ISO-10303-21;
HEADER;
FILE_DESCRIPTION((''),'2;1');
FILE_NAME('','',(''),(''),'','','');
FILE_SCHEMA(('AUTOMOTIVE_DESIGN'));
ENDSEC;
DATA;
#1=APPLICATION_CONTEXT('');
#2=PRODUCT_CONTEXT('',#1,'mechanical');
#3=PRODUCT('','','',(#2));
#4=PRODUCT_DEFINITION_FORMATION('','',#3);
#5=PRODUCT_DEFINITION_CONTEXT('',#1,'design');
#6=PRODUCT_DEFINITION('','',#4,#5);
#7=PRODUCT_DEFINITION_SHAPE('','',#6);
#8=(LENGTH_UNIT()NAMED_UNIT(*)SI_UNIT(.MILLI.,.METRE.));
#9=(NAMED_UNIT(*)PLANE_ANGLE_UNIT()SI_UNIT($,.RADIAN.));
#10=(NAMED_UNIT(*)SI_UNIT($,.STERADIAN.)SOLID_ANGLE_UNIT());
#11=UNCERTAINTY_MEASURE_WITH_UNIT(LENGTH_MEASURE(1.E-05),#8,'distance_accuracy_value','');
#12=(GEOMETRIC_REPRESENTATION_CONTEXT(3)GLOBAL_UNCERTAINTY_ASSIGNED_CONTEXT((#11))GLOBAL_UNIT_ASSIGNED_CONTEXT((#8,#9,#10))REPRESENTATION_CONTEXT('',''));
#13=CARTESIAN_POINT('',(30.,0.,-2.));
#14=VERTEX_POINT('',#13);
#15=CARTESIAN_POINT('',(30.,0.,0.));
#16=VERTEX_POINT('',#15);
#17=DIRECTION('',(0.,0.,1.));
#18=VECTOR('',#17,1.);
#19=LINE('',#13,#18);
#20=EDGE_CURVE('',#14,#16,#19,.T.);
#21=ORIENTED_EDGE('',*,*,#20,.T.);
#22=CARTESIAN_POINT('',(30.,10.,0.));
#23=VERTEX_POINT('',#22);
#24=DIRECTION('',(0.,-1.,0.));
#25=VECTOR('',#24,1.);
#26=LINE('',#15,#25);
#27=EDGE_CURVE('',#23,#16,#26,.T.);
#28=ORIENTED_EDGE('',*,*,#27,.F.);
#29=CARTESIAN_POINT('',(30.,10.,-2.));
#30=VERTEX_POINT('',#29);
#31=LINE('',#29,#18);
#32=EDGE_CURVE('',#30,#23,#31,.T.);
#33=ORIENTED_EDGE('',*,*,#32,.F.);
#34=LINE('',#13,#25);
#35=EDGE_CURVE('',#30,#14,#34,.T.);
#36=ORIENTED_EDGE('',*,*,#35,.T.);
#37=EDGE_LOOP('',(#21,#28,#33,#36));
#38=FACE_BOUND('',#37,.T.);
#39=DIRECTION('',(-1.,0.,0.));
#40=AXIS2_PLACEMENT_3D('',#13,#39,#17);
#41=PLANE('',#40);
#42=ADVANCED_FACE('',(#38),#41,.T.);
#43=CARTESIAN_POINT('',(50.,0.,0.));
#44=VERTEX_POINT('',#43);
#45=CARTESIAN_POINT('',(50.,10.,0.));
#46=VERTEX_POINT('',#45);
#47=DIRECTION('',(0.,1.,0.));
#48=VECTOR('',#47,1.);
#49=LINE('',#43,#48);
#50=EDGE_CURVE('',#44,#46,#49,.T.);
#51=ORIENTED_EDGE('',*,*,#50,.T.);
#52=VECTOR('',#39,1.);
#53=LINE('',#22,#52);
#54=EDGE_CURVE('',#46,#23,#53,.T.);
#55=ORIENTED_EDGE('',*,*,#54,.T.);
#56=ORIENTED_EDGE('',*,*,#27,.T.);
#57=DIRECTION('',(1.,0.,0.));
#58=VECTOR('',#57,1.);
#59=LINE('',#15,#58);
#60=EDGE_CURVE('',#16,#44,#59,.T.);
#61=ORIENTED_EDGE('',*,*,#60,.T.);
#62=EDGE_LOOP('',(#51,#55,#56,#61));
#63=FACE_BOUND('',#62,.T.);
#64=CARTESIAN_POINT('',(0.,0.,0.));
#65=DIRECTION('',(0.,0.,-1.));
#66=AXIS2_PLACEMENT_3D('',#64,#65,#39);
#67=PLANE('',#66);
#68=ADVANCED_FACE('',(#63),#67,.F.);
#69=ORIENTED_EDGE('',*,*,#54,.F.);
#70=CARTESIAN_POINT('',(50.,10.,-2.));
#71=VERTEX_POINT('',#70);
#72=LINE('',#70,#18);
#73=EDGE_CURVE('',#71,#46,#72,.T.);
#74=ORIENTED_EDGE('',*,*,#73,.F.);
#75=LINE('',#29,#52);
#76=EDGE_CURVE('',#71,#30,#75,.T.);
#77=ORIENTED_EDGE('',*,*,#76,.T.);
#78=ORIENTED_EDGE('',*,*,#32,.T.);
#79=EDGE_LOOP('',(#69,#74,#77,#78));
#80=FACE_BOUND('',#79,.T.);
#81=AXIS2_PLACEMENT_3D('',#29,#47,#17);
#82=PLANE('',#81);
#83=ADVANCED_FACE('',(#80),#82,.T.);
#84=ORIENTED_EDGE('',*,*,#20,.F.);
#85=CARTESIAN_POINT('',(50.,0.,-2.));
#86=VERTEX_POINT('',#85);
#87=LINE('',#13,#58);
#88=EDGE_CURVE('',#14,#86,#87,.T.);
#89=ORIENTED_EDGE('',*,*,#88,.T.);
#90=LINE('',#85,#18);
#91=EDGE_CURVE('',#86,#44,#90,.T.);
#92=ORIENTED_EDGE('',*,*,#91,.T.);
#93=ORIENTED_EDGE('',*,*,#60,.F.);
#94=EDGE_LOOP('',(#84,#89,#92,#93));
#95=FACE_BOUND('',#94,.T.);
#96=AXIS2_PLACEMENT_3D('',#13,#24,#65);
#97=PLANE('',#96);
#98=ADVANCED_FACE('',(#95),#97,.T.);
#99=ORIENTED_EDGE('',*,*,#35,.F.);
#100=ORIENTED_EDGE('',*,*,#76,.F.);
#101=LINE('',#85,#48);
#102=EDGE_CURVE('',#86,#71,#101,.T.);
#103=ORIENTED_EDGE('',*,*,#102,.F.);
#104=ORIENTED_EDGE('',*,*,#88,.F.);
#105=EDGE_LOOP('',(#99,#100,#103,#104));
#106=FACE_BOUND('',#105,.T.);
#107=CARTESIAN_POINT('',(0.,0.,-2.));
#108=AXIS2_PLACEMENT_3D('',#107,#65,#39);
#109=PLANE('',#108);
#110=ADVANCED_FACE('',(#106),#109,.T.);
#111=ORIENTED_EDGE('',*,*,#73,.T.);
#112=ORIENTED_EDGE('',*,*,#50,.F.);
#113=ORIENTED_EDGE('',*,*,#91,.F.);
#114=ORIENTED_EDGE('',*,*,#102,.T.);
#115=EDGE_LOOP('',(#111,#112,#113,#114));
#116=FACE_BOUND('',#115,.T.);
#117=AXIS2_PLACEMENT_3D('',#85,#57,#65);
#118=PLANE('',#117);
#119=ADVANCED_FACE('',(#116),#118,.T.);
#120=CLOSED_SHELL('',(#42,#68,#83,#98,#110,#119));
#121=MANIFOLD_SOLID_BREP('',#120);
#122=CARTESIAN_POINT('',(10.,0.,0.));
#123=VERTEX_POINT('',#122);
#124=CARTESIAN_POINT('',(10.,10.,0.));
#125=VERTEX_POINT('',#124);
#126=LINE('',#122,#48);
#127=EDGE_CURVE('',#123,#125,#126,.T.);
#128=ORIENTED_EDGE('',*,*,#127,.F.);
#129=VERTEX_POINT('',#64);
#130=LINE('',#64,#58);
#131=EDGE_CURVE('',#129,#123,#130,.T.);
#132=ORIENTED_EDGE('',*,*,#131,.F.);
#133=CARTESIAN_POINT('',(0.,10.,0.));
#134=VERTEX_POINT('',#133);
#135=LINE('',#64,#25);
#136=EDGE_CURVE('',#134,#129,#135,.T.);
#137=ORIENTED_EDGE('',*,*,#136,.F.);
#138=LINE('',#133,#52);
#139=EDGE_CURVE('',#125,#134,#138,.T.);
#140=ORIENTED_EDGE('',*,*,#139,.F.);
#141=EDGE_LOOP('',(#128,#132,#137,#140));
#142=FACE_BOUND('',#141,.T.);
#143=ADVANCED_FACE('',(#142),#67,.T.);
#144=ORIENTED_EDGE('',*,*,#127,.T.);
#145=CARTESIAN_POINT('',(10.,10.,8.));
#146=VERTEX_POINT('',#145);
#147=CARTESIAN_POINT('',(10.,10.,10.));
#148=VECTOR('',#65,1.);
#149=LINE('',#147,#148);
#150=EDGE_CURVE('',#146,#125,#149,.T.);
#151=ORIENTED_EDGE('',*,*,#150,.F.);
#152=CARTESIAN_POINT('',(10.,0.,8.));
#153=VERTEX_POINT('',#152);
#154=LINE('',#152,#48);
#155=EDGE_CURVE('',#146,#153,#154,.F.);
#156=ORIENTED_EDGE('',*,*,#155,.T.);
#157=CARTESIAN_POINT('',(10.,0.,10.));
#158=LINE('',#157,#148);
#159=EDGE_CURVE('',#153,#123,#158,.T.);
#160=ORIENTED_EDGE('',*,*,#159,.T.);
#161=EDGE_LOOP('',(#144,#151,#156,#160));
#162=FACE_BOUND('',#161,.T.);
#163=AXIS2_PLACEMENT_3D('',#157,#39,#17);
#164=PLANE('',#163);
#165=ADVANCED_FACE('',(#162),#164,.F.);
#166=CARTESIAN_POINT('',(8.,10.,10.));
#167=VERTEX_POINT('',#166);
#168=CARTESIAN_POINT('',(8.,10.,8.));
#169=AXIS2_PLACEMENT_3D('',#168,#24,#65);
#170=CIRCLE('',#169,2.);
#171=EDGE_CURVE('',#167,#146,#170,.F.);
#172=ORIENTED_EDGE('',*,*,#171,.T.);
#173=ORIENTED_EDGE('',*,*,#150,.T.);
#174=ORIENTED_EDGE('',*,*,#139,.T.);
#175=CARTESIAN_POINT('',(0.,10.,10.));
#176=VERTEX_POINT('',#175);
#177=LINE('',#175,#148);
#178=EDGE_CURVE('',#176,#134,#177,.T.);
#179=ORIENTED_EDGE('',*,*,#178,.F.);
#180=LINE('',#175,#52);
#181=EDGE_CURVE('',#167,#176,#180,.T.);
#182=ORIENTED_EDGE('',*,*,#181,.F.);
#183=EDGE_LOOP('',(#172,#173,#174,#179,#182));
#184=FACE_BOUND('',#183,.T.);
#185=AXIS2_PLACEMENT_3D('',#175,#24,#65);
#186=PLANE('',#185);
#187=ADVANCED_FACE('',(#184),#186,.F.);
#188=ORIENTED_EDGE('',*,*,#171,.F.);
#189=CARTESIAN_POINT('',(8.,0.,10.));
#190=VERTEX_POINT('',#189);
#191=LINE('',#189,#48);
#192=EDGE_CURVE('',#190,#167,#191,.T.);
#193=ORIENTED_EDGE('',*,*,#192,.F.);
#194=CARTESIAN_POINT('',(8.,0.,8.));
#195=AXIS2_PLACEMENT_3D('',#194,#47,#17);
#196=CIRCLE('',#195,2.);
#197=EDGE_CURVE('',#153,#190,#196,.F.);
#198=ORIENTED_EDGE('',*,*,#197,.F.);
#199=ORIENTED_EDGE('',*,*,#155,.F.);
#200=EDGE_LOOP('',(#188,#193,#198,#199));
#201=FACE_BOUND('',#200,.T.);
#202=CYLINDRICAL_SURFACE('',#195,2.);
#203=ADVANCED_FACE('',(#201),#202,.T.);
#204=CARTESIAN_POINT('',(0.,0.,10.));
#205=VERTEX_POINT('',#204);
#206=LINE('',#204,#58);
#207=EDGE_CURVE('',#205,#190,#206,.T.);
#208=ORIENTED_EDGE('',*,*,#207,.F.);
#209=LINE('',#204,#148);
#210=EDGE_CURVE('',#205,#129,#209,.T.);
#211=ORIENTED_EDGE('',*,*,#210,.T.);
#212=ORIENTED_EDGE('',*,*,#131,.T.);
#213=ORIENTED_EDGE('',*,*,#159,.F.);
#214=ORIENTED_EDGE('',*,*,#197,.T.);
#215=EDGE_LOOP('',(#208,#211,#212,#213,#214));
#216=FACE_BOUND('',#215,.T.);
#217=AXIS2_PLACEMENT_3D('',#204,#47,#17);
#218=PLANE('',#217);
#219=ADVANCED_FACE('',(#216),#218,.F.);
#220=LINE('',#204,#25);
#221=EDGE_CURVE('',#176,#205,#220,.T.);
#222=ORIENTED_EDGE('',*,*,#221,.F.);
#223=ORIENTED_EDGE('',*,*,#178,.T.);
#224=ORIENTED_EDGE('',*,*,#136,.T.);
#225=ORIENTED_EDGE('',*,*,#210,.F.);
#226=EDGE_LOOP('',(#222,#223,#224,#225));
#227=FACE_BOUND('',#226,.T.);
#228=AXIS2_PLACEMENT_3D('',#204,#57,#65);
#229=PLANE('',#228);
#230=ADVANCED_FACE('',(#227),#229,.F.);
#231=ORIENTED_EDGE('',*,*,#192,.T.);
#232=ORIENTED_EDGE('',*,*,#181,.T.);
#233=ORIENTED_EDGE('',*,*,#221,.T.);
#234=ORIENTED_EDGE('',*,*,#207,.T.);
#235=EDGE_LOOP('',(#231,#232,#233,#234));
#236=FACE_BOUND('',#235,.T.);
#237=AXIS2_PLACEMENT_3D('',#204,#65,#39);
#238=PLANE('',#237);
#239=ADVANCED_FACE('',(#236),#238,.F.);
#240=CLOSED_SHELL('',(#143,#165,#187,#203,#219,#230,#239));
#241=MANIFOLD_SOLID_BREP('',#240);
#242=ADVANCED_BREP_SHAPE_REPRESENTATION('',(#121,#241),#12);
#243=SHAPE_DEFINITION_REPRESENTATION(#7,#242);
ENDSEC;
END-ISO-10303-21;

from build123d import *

# Parameters (mm, degrees)
SKETCH_1_W             = 10
SKETCH_1_H             = 10
EXTRUDE_1_DEPTH        = 10
FILLET_1_R             = 2
SKETCH_2_W             = 20
SKETCH_2_H             = 10
SM_BASE_FLANGE_1_DEPTH = 2


# Sheet-metal steps are written as plain solids
with BuildPart() as part:
    # Sketch 1 → 凸台-拉伸1 (new body)
    with BuildSketch(Plane.XY):
        with Locations((5, 5)):
            Rectangle(SKETCH_1_W, SKETCH_1_H)
    extrude(amount=EXTRUDE_1_DEPTH)

    # 圆角1
    fillet_1_edges = [part.edges().sort_by_distance(p)[0] for p in [
        (10, 5, 10),
    ]]
    fillet(fillet_1_edges, radius=FILLET_1_R)


with BuildPart() as body_2:
    # Sketch 2 → 基体-法兰1 (new body)
    with BuildSketch(Plane.XY):
        with Locations((40, 5)):
            Rectangle(SKETCH_2_W, SKETCH_2_H)
    extrude(amount=-SM_BASE_FLANGE_1_DEPTH)


solid = Compound([part.part, body_2.part])
